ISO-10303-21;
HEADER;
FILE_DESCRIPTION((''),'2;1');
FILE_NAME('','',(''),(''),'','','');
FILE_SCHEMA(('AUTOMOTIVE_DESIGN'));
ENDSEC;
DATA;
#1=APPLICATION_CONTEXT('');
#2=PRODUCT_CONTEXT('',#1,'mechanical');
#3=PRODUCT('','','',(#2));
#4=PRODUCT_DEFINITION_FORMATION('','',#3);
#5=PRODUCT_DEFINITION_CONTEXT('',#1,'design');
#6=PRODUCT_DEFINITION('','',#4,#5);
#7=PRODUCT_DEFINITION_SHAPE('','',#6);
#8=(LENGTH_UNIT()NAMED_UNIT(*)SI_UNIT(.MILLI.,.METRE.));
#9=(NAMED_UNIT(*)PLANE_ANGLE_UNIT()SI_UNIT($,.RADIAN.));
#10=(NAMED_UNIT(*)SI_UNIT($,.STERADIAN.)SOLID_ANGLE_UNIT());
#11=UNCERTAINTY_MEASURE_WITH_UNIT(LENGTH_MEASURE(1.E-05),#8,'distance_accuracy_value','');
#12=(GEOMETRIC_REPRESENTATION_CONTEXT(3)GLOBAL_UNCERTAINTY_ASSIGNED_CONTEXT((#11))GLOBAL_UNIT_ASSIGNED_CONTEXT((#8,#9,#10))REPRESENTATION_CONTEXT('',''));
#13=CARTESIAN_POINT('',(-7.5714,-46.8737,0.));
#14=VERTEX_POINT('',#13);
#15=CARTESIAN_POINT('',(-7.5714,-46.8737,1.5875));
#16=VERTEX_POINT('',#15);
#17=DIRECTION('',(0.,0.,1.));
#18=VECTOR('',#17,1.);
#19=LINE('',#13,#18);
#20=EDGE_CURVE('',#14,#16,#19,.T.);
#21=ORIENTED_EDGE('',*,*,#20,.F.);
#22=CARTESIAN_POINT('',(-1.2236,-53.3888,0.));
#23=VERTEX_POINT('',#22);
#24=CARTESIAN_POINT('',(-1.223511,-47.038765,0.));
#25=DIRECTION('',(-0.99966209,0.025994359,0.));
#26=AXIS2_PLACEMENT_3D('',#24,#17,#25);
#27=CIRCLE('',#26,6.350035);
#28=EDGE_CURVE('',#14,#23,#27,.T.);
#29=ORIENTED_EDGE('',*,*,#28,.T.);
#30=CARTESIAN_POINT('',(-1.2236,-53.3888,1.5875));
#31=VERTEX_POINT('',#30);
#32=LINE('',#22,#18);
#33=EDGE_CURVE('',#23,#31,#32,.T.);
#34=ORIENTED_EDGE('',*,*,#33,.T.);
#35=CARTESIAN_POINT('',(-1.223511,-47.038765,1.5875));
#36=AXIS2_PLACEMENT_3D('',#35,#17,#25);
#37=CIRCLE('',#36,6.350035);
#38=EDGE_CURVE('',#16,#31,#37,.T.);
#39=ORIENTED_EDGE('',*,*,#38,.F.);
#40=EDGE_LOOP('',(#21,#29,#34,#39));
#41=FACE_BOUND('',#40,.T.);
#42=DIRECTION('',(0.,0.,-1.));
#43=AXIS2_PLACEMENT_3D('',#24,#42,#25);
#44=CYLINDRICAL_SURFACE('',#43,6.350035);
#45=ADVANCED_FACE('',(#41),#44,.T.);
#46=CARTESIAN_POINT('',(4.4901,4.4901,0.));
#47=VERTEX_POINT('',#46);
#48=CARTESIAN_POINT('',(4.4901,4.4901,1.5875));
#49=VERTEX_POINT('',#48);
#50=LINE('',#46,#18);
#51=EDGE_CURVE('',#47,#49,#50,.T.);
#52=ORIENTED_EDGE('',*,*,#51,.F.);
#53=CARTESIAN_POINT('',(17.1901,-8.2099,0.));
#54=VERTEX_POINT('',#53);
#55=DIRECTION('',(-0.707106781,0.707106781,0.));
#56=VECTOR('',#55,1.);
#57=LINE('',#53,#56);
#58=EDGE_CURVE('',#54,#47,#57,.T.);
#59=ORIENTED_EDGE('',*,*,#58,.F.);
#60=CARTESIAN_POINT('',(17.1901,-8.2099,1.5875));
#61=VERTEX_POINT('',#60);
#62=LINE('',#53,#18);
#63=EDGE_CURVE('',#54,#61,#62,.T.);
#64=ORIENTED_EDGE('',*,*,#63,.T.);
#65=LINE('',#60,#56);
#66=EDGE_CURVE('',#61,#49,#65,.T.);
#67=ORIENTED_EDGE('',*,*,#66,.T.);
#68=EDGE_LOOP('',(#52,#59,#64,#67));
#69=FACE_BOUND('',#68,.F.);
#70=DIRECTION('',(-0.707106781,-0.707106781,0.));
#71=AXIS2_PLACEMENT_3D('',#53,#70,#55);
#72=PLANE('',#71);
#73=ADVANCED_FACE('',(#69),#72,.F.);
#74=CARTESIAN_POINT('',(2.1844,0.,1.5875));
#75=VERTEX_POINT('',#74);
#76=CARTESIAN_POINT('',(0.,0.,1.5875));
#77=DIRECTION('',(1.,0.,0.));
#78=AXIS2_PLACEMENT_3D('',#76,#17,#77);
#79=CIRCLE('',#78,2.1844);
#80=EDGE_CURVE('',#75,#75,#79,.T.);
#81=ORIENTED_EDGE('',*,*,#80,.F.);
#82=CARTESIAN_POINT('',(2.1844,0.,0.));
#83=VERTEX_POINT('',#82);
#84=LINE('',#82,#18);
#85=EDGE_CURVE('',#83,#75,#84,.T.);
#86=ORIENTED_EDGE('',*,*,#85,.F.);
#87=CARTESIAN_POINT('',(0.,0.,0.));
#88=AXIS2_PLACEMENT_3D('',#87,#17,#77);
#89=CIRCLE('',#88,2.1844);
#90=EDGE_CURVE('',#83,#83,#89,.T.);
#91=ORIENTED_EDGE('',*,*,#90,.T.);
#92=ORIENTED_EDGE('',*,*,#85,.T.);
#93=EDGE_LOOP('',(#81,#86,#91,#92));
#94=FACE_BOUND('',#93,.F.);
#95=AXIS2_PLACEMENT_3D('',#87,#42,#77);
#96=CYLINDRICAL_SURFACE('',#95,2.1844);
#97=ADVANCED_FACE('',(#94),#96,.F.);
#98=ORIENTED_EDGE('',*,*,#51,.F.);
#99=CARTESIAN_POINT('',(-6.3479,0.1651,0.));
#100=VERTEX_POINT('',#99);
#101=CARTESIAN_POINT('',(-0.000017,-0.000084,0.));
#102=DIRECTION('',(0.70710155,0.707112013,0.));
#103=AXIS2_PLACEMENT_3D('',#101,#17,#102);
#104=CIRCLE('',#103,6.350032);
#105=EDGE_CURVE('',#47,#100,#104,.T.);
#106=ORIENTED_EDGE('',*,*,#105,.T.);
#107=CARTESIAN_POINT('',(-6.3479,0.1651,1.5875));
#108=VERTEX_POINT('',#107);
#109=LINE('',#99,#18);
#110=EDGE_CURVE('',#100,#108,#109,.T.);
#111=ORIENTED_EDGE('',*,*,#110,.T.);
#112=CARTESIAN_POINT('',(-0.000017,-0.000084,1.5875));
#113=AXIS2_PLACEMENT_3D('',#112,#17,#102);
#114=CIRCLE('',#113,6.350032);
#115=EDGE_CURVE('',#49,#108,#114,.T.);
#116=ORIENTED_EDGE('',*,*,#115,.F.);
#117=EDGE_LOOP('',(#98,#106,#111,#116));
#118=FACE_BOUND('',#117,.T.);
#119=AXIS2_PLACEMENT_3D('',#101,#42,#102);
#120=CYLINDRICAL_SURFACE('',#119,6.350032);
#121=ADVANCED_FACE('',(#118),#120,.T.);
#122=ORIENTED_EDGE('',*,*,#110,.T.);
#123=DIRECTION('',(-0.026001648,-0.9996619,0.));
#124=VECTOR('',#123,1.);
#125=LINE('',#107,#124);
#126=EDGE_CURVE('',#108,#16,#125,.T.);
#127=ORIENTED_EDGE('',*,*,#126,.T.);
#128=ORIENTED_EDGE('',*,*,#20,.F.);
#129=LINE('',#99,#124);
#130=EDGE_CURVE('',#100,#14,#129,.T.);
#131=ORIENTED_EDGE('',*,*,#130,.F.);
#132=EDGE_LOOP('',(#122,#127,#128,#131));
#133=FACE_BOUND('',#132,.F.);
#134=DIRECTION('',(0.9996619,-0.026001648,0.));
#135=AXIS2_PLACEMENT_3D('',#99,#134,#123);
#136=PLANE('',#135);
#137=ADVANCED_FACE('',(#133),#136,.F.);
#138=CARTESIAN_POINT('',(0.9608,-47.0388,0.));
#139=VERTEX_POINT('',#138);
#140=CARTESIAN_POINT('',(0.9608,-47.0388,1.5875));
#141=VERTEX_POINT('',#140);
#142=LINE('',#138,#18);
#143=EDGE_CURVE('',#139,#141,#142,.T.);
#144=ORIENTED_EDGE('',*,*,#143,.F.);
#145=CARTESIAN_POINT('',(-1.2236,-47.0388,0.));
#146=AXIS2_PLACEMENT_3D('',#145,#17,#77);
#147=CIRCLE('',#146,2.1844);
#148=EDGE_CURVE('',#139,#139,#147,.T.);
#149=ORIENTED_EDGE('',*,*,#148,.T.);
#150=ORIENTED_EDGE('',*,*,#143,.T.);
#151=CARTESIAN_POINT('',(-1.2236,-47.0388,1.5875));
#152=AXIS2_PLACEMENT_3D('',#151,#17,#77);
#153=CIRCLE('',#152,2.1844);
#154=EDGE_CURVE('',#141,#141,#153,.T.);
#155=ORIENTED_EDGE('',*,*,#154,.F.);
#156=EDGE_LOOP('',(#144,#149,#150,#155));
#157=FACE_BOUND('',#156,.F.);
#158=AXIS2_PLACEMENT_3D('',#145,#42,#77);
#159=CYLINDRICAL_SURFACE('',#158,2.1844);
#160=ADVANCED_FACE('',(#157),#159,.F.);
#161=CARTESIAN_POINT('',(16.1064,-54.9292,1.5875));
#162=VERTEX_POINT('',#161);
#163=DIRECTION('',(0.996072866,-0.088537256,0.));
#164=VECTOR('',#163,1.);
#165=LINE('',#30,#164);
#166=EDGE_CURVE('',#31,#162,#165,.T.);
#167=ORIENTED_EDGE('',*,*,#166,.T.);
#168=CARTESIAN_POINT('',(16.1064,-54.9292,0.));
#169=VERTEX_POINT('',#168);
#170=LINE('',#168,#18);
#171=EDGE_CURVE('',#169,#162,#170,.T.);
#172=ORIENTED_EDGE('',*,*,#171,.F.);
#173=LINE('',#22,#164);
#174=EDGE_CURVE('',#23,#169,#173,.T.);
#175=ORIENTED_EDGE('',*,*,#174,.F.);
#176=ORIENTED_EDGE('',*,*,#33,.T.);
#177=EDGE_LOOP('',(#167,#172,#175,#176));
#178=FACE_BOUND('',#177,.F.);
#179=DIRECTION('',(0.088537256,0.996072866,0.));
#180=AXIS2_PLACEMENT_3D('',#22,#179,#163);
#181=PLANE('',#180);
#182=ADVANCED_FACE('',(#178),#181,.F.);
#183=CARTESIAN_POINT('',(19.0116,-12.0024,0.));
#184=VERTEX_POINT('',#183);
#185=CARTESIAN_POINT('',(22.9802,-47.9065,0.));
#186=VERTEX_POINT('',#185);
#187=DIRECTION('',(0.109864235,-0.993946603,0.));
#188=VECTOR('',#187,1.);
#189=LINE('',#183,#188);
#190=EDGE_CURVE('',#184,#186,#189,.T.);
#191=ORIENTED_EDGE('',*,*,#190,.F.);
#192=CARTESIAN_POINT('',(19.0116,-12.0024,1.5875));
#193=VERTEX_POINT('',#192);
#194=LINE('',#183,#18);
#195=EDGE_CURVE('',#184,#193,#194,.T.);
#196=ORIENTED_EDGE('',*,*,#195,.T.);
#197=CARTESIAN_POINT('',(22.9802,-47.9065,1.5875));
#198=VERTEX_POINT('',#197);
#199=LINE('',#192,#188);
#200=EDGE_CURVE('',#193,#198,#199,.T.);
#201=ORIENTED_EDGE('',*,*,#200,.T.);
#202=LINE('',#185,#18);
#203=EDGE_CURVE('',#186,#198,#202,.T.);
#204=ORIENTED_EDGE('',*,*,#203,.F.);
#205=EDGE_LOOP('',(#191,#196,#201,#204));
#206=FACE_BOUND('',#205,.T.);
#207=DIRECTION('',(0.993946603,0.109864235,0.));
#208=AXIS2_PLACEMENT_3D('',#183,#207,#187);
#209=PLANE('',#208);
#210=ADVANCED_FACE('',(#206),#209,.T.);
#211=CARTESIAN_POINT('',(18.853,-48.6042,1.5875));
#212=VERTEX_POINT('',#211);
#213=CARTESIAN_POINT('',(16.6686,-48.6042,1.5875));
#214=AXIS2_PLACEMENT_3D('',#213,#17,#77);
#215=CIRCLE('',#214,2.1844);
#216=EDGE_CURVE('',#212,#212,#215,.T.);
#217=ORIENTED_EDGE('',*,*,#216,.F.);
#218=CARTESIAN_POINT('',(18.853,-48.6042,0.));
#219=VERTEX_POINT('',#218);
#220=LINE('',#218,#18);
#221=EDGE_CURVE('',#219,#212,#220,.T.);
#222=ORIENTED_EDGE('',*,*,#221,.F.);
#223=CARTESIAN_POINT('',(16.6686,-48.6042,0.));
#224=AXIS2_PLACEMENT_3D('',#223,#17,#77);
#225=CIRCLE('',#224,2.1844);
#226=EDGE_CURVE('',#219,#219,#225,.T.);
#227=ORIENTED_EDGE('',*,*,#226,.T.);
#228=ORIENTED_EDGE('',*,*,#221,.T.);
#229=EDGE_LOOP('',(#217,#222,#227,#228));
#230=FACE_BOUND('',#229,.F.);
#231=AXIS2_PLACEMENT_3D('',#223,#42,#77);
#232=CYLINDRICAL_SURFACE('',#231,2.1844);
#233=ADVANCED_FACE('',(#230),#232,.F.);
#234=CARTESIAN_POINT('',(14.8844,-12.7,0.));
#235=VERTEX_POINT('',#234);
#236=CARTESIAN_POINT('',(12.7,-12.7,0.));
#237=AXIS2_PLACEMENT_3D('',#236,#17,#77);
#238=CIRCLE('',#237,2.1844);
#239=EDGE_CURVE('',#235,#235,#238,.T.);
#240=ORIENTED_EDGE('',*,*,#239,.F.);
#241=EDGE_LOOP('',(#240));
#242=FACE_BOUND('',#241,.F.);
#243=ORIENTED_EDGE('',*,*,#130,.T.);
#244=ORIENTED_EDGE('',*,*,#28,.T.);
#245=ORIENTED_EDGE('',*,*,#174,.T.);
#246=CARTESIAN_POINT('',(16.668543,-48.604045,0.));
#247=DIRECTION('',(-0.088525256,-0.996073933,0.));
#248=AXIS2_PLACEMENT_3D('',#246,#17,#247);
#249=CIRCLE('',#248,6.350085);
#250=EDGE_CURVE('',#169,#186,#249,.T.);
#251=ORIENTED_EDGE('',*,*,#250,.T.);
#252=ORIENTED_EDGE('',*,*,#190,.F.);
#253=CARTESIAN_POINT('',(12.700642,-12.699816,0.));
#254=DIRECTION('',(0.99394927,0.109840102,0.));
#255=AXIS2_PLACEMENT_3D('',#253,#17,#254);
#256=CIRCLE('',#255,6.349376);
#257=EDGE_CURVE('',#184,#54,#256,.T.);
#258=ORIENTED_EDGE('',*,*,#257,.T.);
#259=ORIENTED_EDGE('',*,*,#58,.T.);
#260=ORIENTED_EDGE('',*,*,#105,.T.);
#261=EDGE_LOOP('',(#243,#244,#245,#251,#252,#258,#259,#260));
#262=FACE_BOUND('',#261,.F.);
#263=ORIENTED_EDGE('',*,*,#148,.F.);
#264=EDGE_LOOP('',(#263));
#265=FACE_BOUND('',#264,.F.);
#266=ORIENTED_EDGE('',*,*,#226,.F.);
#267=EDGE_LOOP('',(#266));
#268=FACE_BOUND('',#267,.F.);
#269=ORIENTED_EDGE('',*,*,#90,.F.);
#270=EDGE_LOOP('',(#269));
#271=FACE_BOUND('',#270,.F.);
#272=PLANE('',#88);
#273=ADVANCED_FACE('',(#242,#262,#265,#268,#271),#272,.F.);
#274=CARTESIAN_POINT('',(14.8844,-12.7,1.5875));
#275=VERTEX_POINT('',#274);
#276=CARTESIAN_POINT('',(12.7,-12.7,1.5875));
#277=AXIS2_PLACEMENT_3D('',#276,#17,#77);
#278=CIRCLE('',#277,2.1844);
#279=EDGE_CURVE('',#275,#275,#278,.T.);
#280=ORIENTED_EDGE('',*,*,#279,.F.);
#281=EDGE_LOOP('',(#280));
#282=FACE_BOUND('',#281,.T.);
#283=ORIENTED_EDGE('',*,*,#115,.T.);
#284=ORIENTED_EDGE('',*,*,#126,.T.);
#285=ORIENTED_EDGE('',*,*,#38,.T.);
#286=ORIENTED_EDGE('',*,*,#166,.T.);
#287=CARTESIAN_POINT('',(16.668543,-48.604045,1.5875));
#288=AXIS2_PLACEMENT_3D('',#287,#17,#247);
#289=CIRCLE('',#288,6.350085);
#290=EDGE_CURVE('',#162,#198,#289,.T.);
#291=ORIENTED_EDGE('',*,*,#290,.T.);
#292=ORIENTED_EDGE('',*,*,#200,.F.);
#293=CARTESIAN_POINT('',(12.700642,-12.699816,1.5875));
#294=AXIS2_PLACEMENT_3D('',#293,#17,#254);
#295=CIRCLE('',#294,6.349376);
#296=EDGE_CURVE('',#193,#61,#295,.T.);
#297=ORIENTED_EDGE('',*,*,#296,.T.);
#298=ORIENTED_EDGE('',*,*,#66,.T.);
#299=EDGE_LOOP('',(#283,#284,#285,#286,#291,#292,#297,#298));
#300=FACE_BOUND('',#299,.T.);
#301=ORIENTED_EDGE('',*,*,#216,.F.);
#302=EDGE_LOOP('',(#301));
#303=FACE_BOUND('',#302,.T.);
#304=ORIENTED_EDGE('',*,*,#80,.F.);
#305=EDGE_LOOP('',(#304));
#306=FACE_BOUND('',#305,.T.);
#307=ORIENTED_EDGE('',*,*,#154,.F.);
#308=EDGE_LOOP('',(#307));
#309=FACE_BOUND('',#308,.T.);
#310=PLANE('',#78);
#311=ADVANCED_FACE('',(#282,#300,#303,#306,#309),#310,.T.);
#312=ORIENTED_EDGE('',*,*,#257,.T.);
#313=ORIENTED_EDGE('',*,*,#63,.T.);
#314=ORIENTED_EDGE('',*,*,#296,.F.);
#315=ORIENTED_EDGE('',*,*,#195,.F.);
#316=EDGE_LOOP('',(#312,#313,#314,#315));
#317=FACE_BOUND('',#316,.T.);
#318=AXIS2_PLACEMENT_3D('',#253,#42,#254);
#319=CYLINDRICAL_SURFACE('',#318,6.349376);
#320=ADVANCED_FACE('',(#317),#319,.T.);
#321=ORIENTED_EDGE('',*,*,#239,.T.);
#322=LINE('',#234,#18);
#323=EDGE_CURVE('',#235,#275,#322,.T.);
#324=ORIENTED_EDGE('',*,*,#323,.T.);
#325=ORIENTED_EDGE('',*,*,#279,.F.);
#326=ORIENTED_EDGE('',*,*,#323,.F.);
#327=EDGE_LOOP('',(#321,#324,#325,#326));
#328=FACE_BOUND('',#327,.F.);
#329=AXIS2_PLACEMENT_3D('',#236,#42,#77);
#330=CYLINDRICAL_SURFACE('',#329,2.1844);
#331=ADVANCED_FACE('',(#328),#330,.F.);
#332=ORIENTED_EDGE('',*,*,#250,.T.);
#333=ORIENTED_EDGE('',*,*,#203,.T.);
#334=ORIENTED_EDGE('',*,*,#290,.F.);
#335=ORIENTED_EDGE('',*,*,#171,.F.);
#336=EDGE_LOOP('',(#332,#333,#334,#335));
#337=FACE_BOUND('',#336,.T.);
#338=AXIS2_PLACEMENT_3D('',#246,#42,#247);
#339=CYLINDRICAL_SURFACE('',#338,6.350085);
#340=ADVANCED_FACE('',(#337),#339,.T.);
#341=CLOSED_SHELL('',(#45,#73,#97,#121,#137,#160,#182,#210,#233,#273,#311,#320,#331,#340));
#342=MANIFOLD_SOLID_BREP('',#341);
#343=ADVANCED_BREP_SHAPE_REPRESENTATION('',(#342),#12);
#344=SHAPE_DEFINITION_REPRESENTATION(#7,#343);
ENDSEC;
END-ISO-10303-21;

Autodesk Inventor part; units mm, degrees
ref_plane "YZ Plane" through (0, 0, 0) normal (1, 0, 0) x (0, 1, 0)
ref_plane "XZ Plane" through (0, 0, 0) normal (0, 1, 0) x (-1, 0, 0)
ref_plane "XY Plane" through (0, 0, 0) normal (0, 0, 1) x (1, 0, 0)
sketch "main" plane through (0, 0, 0) normal (0, 0, 1) x (1, 0, 0)
  circle A0 centre (-9.3272, -22.4282) radius 2.1844
  circle A1 centre (8.5649, -23.9935) radius 2.1844
  circle A2 centre (4.5963, 11.9106) radius 2.1844
  arc A3 (-15.6751, -22.2631) -> (-9.3272, -28.7782) centre (-9.3272, -22.4282) ccw
  arc A4 (8.0027, -30.3186) -> (14.8765, -23.2959) centre (8.5649, -23.9935) ccw
  arc A5 (10.9079, 12.6083) -> (9.0865, 16.4007) centre (4.5963, 11.9106) ccw
  line L0 (-9.3272, -28.7782) -> (8.0027, -30.3186)
  line L1 (10.9079, 12.6083) -> (14.8765, -23.2959)
  circle A6 centre (-8.1037, 24.6106) radius 2.1844
  arc A7 (-3.6135, 29.1007) -> (-14.4515, 24.7757) centre (-8.1037, 24.6106) ccw
  line L2 (9.0865, 16.4007) -> (-3.6135, 29.1007)
  line L3 (-14.4515, 24.7757) -> (-15.6751, -22.2631)
  point P0 (-0.372, -2.6392)
  dimension "d0" = 12.7
  dimension "d1" = 12.7
  dimension "d2" = 12.7
  dimension "d3" = 12.7
sketch "Sketch1" plane through (0, 0, 0) normal (0, 0, 1) x (1, 0, 0)
  circle A0 centre (-1.2236, -47.0388) radius 2.1844
  circle A1 centre (16.6686, -48.6042) radius 2.1844
  circle A2 centre (12.7, -12.7) radius 2.1844
  arc A3 (-7.5714, -46.8737) -> (-1.2236, -53.3888) centre (-1.2236, -47.0388) ccw
  arc A4 (16.1064, -54.9292) -> (22.9802, -47.9065) centre (16.6686, -48.6042) ccw
  arc A5 (19.0116, -12.0024) -> (17.1901, -8.2099) centre (12.7, -12.7) ccw
  line L0 (-1.2236, -53.3888) -> (16.1064, -54.9292)
  line L1 (19.0116, -12.0024) -> (22.9802, -47.9065)
  circle A6 centre (0, 0) radius 2.1844
  arc A7 (4.4901, 4.4901) -> (-6.3479, 0.1651) centre (0, 0) ccw
  line L2 (17.1901, -8.2099) -> (4.4901, 4.4901)
  line L3 (-6.3479, 0.1651) -> (-7.5714, -46.8737)
extrude "Extrusion1" add sketch "Sketch1" along normal blind 1.5875
properties part number "floating-stage-bracket" material "Acetal Resin, Black"
